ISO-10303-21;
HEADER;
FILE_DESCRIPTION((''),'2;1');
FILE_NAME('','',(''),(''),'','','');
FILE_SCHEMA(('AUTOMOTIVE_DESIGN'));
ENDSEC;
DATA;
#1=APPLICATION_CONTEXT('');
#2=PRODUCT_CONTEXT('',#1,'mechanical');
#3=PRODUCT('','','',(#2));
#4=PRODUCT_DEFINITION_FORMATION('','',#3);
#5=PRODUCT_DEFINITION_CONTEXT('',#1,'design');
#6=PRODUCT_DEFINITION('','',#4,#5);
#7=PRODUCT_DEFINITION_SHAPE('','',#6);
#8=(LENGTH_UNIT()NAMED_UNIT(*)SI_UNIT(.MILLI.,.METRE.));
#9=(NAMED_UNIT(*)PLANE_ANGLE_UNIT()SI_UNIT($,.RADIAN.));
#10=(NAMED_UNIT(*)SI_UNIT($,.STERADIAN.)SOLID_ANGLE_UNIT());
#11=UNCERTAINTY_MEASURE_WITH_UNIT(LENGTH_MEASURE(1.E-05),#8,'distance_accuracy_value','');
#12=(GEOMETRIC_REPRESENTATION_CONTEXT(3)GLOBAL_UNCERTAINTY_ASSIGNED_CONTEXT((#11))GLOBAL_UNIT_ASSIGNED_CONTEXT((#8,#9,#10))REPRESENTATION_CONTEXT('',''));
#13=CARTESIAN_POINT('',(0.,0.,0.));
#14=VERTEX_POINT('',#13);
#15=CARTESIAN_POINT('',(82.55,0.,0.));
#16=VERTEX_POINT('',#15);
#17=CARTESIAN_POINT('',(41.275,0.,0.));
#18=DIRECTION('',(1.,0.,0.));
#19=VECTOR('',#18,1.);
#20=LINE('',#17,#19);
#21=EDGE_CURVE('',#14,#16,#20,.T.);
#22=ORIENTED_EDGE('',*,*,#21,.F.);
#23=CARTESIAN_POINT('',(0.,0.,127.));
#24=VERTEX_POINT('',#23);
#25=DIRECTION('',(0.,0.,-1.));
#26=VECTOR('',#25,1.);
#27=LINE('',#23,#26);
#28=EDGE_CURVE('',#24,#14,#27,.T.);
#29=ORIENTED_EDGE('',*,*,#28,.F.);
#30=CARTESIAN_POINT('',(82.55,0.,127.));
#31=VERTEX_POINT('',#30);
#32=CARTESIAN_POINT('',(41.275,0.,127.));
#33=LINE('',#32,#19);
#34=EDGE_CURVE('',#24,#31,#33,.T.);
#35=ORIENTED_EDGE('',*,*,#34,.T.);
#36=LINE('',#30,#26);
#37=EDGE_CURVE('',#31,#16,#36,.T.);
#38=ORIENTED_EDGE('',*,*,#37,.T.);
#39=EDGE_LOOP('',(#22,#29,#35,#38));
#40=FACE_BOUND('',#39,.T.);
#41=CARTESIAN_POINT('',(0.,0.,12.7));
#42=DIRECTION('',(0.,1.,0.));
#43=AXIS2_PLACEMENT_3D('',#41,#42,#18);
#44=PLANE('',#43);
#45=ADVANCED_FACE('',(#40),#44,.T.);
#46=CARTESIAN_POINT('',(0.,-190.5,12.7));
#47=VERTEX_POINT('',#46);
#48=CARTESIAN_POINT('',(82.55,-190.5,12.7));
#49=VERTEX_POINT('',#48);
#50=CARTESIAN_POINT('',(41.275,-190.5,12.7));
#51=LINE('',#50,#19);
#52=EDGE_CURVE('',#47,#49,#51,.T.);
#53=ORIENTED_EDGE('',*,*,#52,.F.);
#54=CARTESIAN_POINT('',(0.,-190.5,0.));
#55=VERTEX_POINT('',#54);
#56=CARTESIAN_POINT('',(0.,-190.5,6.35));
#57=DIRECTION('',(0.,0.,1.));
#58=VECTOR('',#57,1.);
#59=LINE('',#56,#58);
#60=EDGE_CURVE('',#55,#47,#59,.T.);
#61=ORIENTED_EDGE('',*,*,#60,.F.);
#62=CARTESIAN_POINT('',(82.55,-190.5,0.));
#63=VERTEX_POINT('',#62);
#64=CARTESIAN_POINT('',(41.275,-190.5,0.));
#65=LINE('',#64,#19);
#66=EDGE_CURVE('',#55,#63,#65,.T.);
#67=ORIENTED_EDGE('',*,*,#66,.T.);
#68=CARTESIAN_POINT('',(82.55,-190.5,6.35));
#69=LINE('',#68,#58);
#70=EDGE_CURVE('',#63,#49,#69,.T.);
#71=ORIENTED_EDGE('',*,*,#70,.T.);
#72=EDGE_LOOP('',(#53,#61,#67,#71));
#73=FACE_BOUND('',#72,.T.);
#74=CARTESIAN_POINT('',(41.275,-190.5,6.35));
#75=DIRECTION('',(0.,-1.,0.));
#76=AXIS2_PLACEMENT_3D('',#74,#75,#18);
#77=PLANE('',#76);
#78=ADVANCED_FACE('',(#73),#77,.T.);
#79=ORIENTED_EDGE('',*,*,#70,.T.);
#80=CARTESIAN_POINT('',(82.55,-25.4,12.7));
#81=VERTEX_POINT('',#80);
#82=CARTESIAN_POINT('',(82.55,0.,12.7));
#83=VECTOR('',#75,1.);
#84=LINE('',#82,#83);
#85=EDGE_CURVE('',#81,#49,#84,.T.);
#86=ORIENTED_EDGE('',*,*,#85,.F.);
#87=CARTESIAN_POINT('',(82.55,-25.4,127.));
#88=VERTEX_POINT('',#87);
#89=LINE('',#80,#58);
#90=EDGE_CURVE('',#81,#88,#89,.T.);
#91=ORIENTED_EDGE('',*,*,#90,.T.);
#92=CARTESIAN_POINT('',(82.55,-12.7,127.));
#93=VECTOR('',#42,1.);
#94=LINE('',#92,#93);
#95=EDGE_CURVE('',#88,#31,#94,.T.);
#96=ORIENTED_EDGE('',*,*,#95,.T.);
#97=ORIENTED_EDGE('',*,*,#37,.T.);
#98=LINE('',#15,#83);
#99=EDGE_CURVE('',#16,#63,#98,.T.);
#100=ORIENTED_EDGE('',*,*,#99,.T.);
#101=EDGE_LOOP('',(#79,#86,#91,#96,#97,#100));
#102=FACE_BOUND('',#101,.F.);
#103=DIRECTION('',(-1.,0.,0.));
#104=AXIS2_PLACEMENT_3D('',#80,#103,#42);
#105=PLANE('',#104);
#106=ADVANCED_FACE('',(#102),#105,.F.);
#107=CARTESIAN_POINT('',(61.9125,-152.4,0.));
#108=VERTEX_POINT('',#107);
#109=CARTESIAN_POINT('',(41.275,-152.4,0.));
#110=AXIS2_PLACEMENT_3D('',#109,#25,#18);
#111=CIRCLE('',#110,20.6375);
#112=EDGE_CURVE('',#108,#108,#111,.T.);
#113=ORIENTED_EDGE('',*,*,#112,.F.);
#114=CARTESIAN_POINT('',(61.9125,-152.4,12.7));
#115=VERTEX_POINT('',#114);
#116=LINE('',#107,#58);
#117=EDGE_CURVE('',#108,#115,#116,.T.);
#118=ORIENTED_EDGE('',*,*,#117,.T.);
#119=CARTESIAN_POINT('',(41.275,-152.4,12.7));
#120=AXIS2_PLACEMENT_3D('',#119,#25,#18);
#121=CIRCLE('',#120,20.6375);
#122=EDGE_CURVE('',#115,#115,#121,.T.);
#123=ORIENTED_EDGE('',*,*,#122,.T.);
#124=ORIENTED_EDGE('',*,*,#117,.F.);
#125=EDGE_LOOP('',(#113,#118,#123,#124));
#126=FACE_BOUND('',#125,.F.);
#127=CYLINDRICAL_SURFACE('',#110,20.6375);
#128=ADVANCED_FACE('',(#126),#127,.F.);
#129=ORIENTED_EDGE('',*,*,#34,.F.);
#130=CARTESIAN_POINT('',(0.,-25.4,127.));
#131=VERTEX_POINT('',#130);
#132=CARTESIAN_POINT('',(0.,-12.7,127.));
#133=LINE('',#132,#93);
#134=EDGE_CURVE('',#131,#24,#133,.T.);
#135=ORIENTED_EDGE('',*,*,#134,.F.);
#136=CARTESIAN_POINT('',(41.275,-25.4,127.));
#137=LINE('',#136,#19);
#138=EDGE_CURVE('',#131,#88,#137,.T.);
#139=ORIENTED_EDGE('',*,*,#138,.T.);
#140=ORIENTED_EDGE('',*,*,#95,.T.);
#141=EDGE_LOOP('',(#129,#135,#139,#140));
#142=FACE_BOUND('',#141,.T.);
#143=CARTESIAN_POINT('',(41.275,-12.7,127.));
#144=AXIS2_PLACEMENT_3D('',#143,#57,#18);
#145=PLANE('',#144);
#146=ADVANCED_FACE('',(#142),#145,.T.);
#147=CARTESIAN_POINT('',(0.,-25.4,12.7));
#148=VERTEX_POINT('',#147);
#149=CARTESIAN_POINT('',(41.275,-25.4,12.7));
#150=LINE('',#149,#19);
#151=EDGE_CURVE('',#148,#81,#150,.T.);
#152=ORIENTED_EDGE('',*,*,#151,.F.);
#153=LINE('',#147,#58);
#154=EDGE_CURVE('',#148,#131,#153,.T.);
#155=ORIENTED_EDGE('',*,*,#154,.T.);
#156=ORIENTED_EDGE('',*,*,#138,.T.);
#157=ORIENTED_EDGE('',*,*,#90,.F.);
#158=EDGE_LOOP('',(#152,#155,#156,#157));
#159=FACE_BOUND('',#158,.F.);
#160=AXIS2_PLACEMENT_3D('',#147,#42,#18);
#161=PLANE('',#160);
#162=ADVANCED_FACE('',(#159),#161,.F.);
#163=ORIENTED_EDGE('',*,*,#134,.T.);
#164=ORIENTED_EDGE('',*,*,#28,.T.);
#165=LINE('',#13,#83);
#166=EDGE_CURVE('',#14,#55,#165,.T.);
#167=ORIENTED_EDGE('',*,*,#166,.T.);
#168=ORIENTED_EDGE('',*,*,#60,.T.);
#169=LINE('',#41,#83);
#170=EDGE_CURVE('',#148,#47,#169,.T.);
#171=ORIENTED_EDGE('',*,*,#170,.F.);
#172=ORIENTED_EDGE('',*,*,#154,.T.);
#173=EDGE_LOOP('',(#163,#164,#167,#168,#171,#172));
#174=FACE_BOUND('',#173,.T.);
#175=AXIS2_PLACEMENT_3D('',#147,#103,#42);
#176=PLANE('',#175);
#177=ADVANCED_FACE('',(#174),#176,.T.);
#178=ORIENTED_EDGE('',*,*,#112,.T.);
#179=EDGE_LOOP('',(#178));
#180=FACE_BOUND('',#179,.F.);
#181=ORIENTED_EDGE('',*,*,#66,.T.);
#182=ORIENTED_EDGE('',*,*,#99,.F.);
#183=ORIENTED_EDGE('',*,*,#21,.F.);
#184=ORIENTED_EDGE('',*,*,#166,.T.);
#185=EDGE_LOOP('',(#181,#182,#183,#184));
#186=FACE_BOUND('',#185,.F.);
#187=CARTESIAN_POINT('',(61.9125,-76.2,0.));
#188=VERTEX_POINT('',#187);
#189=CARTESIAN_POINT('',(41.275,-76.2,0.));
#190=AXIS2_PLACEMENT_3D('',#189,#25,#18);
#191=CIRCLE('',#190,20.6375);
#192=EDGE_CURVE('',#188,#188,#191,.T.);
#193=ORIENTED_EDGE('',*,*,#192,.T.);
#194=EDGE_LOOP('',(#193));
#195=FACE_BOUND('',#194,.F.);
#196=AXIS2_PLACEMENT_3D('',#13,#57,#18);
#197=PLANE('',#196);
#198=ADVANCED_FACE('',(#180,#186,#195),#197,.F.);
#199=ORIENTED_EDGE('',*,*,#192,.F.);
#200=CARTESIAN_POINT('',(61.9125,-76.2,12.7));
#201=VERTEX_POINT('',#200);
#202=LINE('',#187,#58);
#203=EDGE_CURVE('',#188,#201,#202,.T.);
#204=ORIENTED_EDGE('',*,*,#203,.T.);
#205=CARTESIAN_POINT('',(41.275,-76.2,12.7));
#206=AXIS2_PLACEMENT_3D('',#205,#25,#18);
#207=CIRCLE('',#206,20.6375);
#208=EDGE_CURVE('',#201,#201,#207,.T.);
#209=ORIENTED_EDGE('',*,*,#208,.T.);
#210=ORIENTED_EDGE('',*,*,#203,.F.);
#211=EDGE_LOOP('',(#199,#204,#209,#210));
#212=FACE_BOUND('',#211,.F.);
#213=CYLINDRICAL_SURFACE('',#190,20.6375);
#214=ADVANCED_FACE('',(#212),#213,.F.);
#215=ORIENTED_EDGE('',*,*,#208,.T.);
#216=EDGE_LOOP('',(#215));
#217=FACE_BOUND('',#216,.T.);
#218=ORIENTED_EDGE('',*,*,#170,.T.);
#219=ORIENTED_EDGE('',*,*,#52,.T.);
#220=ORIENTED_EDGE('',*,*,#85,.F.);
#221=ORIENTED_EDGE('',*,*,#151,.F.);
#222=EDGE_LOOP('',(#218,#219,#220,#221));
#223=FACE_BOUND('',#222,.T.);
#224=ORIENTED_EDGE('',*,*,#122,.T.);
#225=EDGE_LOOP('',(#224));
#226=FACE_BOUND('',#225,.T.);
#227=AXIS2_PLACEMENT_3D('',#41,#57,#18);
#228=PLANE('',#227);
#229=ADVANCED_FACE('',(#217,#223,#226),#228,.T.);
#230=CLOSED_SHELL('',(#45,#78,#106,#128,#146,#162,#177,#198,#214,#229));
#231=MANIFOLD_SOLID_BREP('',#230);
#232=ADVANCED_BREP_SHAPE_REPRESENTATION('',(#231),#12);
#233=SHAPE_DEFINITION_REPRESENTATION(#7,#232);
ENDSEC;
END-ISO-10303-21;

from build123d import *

# Parameters (mm, degrees)
F0_W     = 82.55
F0_H     = 12.7
F1_DEPTH = 190.5
F2_R     = 20.6375
F4_DEPTH = 25.4
F5_W     = 82.55
F5_H     = 25.4
F7_DEPTH = 114.3


with BuildPart() as f1:
    # F0 (on Front) → F1 (new body)
    with BuildSketch(Plane.XZ):
        with Locations((41.275, 6.35)):
            Rectangle(F0_W, F0_H)
    extrude(amount=F1_DEPTH)

    # F2 (on face) → F4 (cut)
    with BuildSketch(Plane(origin=(0, 0, 0), x_dir=(1, 0, 0), z_dir=(0, 0, -1))):
        with Locations((41.275, 76.2)):
            Circle(F2_R)
        with Locations((41.275, 152.4)):
            Circle(F2_R)
    extrude(amount=-F4_DEPTH, mode=Mode.SUBTRACT)

    # F5 (on face) → F7 (join)
    with BuildSketch(Plane.XY.offset(12.7)):
        with Locations((41.275, -12.7)):
            Rectangle(F5_W, F5_H)
    extrude(amount=F7_DEPTH)


solid = f1.part
